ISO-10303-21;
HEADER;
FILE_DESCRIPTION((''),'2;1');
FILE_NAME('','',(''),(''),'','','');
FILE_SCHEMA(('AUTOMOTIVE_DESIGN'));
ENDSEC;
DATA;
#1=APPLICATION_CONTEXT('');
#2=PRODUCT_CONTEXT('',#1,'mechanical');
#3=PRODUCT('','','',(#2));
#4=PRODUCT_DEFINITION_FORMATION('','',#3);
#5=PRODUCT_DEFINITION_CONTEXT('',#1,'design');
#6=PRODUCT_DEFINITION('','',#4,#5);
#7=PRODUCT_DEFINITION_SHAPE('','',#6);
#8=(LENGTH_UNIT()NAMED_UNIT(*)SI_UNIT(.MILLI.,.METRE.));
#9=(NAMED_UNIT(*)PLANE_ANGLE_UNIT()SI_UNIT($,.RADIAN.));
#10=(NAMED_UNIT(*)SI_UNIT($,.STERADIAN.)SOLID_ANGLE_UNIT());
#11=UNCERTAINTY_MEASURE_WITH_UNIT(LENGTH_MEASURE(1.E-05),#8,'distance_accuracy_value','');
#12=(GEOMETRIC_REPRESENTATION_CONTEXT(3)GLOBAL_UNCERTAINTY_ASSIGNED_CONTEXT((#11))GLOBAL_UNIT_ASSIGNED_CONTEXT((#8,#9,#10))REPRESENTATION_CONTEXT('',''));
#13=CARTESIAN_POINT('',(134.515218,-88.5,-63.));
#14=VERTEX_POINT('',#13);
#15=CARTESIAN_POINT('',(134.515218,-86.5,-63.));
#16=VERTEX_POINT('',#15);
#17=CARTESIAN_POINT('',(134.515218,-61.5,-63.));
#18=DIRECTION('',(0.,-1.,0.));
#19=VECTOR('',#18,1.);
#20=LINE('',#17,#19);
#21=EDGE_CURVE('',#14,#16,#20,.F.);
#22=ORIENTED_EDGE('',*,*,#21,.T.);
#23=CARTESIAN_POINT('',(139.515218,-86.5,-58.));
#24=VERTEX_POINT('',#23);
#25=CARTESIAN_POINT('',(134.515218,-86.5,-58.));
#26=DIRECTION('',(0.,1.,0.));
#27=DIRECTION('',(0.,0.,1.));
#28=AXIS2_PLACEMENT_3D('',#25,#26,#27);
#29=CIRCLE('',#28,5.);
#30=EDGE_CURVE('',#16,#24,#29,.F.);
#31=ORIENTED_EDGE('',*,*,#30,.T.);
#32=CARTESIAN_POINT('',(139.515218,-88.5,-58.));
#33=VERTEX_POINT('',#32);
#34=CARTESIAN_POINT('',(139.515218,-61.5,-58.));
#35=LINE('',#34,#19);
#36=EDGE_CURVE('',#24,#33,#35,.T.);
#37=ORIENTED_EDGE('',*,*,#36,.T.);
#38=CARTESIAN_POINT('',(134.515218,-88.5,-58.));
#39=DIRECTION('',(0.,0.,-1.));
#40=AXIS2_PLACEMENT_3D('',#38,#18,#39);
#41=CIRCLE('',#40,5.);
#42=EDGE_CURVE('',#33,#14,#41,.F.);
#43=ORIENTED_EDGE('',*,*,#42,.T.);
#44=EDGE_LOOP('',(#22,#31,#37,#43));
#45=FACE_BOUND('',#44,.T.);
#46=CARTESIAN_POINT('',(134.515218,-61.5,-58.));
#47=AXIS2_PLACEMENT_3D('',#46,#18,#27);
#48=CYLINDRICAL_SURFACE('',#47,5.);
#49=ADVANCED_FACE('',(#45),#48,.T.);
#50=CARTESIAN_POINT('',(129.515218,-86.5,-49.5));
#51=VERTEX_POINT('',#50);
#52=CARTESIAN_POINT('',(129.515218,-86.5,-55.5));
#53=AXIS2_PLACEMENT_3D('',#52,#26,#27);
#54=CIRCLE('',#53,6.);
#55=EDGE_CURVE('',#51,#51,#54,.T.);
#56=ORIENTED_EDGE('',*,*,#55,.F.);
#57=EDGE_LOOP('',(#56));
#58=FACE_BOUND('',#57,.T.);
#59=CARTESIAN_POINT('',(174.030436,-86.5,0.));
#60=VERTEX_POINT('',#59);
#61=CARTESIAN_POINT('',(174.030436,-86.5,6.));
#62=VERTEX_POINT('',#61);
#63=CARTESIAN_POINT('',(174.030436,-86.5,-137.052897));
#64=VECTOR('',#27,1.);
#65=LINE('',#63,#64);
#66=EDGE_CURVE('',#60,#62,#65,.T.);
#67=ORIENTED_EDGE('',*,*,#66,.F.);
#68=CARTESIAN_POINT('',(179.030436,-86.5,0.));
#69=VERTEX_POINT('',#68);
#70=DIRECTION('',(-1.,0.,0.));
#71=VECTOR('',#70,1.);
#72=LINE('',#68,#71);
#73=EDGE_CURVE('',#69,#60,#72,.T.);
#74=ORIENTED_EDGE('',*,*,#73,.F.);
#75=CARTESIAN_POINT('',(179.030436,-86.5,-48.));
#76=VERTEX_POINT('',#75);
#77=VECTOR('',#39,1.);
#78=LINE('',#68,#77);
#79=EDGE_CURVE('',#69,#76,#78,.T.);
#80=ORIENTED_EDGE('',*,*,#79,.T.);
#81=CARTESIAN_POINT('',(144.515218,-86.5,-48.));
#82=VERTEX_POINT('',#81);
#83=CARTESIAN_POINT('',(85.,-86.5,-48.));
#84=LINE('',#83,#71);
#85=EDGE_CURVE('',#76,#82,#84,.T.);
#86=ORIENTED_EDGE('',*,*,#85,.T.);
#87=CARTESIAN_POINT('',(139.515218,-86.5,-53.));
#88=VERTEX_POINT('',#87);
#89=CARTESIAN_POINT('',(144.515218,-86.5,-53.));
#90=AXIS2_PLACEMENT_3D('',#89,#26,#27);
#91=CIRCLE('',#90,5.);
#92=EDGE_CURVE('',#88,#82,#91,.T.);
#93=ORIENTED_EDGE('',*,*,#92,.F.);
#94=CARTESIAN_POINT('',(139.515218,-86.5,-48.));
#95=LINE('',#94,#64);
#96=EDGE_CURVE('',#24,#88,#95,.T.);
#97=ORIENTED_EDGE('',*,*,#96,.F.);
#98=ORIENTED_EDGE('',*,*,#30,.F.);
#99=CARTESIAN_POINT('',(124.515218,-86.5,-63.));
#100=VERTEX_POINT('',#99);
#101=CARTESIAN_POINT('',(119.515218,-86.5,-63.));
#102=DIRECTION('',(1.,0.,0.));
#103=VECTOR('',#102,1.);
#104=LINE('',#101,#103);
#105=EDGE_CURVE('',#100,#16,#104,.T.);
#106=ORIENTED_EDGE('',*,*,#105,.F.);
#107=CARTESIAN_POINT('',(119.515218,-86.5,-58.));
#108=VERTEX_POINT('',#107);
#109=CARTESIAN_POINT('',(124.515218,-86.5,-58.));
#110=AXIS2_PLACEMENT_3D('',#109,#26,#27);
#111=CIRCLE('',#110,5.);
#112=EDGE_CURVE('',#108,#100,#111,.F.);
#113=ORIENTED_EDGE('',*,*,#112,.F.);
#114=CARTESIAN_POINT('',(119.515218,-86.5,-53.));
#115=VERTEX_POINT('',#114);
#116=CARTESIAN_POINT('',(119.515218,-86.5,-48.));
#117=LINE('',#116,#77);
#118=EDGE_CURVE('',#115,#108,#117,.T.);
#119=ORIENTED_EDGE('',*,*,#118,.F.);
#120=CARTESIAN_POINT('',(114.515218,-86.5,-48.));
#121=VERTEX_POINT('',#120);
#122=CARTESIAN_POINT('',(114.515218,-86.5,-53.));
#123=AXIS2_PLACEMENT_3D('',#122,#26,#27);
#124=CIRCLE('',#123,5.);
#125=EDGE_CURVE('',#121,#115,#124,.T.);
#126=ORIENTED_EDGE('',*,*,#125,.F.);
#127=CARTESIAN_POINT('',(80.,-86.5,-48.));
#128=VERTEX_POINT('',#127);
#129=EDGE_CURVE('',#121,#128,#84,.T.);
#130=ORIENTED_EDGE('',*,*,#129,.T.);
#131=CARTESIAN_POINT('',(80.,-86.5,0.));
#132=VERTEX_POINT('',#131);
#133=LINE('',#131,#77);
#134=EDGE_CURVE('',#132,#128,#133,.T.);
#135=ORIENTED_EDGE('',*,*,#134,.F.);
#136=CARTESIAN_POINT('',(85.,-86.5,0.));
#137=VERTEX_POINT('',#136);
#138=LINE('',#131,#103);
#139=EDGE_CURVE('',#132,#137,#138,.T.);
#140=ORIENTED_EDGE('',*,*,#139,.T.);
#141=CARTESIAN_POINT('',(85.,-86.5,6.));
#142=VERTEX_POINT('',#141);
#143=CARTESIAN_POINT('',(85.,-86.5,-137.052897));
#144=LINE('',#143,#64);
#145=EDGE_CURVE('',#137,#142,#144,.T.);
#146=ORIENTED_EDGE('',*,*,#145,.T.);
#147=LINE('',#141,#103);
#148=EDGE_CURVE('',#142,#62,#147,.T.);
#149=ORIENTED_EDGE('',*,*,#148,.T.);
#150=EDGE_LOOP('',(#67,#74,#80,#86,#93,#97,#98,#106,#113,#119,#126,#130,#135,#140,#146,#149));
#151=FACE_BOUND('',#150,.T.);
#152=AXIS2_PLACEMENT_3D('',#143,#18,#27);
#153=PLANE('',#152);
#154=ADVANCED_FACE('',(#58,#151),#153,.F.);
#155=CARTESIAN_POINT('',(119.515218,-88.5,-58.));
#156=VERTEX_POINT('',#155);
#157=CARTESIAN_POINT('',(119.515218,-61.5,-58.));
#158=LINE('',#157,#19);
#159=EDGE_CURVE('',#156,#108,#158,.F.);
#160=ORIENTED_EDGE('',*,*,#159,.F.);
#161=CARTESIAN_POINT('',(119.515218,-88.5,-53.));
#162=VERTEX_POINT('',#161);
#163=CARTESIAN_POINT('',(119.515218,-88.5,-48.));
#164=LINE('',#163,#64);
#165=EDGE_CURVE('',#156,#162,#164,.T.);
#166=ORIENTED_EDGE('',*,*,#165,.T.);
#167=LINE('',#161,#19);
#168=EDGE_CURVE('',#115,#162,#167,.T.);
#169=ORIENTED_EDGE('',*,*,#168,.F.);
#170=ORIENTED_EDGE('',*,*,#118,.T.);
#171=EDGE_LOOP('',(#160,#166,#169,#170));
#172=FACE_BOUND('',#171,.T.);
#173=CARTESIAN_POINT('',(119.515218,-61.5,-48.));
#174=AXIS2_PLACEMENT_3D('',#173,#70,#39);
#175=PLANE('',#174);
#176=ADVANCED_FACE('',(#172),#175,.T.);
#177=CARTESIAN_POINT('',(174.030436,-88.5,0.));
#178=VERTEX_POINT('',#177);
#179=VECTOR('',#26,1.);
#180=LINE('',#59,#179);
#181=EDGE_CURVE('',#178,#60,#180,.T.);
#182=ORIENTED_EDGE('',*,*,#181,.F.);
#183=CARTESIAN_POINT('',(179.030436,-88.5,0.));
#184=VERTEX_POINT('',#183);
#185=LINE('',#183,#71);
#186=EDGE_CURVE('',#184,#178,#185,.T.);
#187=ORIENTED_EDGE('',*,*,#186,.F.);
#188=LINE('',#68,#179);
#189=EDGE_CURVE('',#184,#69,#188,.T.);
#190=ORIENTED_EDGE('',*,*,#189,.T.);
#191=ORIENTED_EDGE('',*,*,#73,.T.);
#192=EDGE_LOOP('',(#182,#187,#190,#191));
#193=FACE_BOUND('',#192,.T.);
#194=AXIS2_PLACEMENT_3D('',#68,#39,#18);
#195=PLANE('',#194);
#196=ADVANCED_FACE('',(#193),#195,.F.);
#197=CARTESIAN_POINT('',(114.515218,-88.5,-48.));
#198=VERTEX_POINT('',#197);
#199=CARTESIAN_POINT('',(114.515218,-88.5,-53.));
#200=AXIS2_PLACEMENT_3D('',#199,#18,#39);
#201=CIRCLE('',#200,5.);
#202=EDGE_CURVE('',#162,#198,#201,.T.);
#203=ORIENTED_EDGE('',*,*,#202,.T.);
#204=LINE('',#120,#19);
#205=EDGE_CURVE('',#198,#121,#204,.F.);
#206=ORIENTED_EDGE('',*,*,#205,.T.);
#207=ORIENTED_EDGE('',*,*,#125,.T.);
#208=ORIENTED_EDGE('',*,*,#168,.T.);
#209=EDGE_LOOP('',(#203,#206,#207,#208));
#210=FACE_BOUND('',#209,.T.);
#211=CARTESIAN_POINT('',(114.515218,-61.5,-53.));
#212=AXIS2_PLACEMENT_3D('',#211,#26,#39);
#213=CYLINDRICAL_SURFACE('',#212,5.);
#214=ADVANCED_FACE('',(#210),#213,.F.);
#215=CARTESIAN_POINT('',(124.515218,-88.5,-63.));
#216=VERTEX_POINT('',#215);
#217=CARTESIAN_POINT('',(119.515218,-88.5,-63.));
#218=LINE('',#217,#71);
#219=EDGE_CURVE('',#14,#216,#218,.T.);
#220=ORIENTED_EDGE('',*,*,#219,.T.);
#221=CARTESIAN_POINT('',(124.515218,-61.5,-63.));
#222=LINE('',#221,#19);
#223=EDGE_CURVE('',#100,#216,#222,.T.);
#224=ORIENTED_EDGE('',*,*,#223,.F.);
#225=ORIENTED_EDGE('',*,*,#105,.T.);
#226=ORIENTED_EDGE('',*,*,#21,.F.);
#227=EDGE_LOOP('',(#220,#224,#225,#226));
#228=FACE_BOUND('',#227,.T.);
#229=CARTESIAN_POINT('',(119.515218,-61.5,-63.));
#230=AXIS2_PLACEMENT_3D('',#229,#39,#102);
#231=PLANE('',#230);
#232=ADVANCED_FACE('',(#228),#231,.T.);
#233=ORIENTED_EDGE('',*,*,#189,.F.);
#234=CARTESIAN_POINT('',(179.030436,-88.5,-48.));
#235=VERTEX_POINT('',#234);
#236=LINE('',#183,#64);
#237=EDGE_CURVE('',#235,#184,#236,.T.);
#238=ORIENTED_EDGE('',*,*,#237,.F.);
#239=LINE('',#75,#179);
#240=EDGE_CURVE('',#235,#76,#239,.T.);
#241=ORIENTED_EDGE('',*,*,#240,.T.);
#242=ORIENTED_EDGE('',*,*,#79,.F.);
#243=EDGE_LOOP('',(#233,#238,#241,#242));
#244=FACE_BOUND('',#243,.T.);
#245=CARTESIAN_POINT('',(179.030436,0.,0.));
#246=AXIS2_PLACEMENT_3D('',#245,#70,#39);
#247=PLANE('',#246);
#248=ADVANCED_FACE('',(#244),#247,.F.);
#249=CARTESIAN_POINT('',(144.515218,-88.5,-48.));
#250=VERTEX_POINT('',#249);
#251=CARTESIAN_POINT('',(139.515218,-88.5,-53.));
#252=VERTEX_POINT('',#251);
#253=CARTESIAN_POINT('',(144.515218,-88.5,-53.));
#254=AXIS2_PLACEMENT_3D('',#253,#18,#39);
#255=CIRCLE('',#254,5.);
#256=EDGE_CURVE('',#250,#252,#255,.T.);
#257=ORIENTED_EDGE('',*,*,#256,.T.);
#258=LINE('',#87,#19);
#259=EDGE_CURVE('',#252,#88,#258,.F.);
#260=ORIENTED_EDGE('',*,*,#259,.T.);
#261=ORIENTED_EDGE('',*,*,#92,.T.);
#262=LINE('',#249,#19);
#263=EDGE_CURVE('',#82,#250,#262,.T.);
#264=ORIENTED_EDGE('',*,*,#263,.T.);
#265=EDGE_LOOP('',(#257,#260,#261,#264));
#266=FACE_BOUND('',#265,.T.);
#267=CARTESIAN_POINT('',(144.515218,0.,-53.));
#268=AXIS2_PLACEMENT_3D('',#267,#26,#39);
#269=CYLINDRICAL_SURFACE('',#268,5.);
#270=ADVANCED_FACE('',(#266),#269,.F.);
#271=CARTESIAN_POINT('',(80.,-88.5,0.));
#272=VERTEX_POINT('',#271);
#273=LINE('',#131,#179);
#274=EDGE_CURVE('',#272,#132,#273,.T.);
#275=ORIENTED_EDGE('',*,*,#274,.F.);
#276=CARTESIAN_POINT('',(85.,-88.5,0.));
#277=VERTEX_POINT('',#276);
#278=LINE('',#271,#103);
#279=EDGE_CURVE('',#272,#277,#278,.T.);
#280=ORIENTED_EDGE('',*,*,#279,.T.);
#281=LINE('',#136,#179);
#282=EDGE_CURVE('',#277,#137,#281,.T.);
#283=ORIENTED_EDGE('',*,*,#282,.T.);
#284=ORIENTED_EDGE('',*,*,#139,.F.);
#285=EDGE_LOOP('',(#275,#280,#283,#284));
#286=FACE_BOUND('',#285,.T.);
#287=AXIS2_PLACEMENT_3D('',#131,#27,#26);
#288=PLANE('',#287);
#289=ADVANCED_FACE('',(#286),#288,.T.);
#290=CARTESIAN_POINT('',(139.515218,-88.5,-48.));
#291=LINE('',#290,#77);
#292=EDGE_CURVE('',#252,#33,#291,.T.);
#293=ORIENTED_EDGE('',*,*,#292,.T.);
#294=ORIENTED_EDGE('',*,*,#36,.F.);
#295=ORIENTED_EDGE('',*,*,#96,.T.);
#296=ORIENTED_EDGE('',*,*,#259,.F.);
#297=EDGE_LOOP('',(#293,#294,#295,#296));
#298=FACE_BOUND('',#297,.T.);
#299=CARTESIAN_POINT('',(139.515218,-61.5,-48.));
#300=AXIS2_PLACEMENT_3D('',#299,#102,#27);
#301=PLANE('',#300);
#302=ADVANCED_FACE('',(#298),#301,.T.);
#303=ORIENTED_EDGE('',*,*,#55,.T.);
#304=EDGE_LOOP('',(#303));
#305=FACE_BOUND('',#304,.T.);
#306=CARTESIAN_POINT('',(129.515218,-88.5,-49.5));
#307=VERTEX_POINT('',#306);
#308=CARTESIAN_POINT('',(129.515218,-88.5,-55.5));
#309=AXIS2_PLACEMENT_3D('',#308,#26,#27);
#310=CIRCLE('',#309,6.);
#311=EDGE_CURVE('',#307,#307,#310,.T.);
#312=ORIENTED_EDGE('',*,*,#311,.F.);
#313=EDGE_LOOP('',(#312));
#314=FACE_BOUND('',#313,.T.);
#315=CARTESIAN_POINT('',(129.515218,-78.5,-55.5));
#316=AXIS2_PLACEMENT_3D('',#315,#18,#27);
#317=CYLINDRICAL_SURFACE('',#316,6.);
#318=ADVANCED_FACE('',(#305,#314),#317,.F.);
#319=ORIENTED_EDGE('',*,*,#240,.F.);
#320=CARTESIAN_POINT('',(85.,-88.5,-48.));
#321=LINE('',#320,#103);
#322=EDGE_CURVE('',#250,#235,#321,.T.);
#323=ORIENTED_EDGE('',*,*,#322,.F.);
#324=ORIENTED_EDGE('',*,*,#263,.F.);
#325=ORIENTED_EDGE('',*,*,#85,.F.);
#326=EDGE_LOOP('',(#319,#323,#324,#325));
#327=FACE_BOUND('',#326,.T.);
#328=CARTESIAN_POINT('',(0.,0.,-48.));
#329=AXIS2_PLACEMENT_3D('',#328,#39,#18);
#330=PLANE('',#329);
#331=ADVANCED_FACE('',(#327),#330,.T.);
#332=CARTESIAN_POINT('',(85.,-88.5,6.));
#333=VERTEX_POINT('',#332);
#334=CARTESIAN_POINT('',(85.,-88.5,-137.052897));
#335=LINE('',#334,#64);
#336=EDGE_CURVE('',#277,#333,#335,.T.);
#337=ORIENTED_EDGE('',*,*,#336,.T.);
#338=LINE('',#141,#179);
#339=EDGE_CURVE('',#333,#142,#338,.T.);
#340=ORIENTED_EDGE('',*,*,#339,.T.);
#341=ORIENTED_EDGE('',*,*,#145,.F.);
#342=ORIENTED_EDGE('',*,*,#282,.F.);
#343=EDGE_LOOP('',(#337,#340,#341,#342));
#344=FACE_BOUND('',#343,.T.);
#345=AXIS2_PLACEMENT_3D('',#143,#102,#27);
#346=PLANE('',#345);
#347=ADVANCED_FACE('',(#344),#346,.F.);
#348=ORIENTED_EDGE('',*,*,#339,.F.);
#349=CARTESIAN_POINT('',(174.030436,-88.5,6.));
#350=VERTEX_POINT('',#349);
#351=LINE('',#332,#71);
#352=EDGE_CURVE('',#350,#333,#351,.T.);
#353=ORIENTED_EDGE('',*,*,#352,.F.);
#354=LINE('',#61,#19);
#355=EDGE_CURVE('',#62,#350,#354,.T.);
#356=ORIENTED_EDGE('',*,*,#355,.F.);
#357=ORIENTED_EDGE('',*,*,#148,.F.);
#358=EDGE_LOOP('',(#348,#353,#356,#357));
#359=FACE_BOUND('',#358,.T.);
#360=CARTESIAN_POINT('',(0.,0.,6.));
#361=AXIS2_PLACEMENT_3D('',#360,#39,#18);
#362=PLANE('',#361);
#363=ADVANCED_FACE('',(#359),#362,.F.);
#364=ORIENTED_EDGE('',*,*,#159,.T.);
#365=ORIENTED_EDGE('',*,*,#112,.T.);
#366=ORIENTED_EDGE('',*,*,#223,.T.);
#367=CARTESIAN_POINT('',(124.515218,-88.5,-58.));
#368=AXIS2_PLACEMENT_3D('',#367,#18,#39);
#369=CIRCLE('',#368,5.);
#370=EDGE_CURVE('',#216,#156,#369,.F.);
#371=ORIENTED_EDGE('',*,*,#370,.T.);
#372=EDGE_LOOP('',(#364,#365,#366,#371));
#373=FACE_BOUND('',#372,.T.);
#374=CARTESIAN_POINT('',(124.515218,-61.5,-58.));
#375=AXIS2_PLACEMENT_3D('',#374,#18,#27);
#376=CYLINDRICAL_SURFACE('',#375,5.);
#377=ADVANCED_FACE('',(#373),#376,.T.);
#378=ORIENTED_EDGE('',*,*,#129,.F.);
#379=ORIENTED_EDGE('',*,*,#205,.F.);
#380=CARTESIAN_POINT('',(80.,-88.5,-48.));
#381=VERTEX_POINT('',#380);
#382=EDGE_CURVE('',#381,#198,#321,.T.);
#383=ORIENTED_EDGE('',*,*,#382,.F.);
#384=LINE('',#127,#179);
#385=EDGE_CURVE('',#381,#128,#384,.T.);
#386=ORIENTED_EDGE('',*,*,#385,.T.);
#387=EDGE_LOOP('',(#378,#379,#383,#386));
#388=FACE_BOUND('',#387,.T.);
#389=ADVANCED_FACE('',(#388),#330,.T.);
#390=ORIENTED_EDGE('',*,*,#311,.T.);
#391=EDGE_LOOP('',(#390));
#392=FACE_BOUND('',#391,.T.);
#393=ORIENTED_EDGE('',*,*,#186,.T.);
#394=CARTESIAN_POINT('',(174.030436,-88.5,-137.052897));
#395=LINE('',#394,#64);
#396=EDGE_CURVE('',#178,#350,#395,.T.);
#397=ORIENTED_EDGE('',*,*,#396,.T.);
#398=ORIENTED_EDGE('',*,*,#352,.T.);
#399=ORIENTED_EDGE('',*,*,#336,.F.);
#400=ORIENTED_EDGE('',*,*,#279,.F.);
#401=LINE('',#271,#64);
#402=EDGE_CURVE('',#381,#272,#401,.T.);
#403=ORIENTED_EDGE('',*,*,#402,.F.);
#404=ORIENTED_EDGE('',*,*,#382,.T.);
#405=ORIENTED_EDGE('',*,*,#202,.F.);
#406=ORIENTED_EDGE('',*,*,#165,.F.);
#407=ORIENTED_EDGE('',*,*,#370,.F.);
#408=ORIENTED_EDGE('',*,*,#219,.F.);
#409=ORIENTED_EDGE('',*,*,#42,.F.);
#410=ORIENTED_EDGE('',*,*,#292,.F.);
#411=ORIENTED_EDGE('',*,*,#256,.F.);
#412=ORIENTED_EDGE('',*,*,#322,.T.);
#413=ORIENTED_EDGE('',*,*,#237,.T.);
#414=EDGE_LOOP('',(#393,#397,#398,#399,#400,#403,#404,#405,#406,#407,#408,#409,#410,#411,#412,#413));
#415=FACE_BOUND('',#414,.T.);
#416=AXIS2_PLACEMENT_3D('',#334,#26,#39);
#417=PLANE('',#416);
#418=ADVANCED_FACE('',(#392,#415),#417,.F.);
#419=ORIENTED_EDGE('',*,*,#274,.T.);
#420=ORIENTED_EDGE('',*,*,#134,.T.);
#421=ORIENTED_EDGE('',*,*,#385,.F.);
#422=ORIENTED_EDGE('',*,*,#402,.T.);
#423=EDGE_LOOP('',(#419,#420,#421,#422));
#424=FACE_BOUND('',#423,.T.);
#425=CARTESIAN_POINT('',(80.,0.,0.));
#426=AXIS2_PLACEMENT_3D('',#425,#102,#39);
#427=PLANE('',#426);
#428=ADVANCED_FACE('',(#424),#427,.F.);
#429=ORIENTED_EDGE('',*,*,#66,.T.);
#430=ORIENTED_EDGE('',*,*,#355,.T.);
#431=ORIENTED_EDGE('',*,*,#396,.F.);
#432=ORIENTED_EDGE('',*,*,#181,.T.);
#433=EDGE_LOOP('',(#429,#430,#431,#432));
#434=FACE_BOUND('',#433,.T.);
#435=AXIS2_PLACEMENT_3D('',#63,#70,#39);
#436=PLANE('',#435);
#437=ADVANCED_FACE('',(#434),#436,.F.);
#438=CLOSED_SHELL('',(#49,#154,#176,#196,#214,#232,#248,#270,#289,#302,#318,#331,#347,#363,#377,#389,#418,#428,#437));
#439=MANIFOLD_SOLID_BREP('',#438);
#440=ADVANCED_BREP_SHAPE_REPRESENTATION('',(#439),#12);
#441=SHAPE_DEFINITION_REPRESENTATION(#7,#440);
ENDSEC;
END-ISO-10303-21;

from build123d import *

# Parameters (mm, degrees)
ESTRUSIONE_ESTRUSIONE1_DEPTH      = 48
ESTRUSIONE_ESTRUSIONE1_DEPTH_BACK = 6
SCHIZZO1_W                        = 89.03043591
SCHIZZO1_H                        = 2
SCHIZZO2_W                        = 45
SCHIZZO2_H                        = 2
ESTRUSIONE_ESTRUSIONE2_DEPTH      = 5
SCHIZZO3_W                        = 5
SCHIZZO3_H                        = 2
ESTRUSIONE_ESTRUSIONE3_DEPTH      = 3
SCHIZZO4_W                        = 20
SCHIZZO4_H                        = 15
ESTRUSIONE_ESTRUSIONE4_DEPTH      = 2
SCHIZZO5_R                        = 6
TAGLIO_ESTRUSIONE1_DEPTH          = 10
RACCORDO1_R                       = 5
CORPO_SPOSTA_COPIA3_START         = -88.5
CORPO_SPOSTA_COPIA3_OUTLINE_R     = 6
CORPO_SPOSTA_COPIA3_DEPTH         = 2
CORPO_SPOSTA_COPIA3_2_OUTLINE_R   = 6
CORPO_SPOSTA_COPIA3_2_DEPTH       = 2


# Read off the part's stored shape, not the designer's step: Corpo-Sposta/copia3
with BuildPart() as part:
    # Schizzo1 → Estrusione-Estrusione1 (new, two sides: drawn at the far end of the back side and taken through both)
    with BuildSketch(Plane.XY.offset(-ESTRUSIONE_ESTRUSIONE1_DEPTH_BACK)):
        with Locations((129.515217955, -87.5)):
            Rectangle(SCHIZZO1_W, SCHIZZO1_H)
    extrude(amount=ESTRUSIONE_ESTRUSIONE1_DEPTH + ESTRUSIONE_ESTRUSIONE1_DEPTH_BACK)

    # Schizzo2 → Estrusione-Estrusione2 (add)
    with BuildSketch(Plane(origin=(174.03043591, 0, 0), x_dir=(0, 0, -1), z_dir=(1, 0, 0))):
        with Locations((-22.5, -87.5)):
            Rectangle(SCHIZZO2_W, SCHIZZO2_H)
    estrusione_estrusione2 = extrude(amount=ESTRUSIONE_ESTRUSIONE2_DEPTH)

    # Schizzo3 → Estrusione-Estrusione3 (add)
    with BuildSketch(Plane.XY.offset(45)):
        with Locations((176.53043591, -87.5)):
            Rectangle(SCHIZZO3_W, SCHIZZO3_H)
    estrusione_estrusione3 = extrude(amount=ESTRUSIONE_ESTRUSIONE3_DEPTH)

    # Specchia1: Estrusione-Estrusione2, Estrusione-Estrusione3 across plane
    add(estrusione_estrusione2.mirror(Plane(origin=(129.515217955, 0, 0), x_dir=(0, 0, 1), z_dir=(1, 0, 0))))
    add(estrusione_estrusione3.mirror(Plane(origin=(129.515217955, 0, 0), x_dir=(0, 0, 1), z_dir=(1, 0, 0))))

    # Schizzo4 → Estrusione-Estrusione4 (add)
    with BuildSketch(Plane(origin=(0, -88.5, 0), x_dir=(-1, 0, 0), z_dir=(0, -1, 0))):
        with Locations((-129.515217955, -55.5)):
            Rectangle(SCHIZZO4_W, SCHIZZO4_H)
    extrude(amount=-ESTRUSIONE_ESTRUSIONE4_DEPTH)

    # Schizzo5 → Taglio-Estrusione1 (cut)
    with BuildSketch(Plane.XZ.offset(88.5)):
        with Locations(Location((129.515217955, 55.5, 0), (0, 0, 270))):
            Circle(SCHIZZO5_R)
    extrude(amount=-TAGLIO_ESTRUSIONE1_DEPTH, mode=Mode.SUBTRACT)

    # Raccordo1
    raccordo1_edges = [part.edges().sort_by_distance(p)[0] for p in [
        (139.515217955, -87.5, 63),
        (139.515217955, -87.5, 48),
        (119.515217955, -87.5, 48),
        (119.515217955, -87.5, 63),
    ]]
    fillet(raccordo1_edges, radius=RACCORDO1_R)

    # Corpo-Sposta/copia3 outline → Corpo-Sposta/copia3 (cut)
    with BuildSketch(Plane(origin=(0, 0, 0), x_dir=(1, 0, 0), z_dir=(0, 1, 0)).offset(CORPO_SPOSTA_COPIA3_START)):
        with BuildLine():
            Line((179.03043591, -48), (179.03043591, 0))
            Line((179.03043591, 0), (174.03043591, 0))
            Line((174.03043591, 0), (174.03043591, -6))
            Line((174.03043591, -6), (85, -6))
            Line((85, -6), (85, 0))
            Line((85, 0), (80, 0))
            Line((80, 0), (80, -48))
            Line((80, -48), (114.515217955, -48))
            ThreePointArc((114.515217955, -48), (118.050751861, -49.464466094), (119.515217955, -53))
            Line((119.515217955, -53), (119.515217955, -58))
            ThreePointArc((119.515217955, -58), (120.979684049, -61.535533906), (124.515217955, -63))
            Line((124.515217955, -63), (134.515217955, -63))
            ThreePointArc((134.515217955, -63), (138.050751861, -61.535533906), (139.515217955, -58))
            Line((139.515217955, -58), (139.515217955, -53))
            ThreePointArc((139.515217955, -53), (140.979684049, -49.464466094), (144.515217955, -48))
            Line((144.515217955, -48), (179.03043591, -48))
        make_face()
        with Locations((129.515217955, -55.5)):
            Circle(CORPO_SPOSTA_COPIA3_OUTLINE_R, mode=Mode.SUBTRACT)
    extrude(amount=CORPO_SPOSTA_COPIA3_DEPTH, mode=Mode.SUBTRACT)

    # Corpo-Sposta_copia3 2 outline → Corpo-Sposta_copia3 2 (add)
    with BuildSketch(Plane(origin=(0, 0, 0), x_dir=(1, 0, 0), z_dir=(0, 1, 0)).offset(CORPO_SPOSTA_COPIA3_START)):
        with BuildLine():
            Line((179.03043591, 0), (179.03043591, 48))
            Line((179.03043591, 48), (144.515217955, 48))
            ThreePointArc((144.515217955, 48), (140.979684049, 49.464466094), (139.515217955, 53))
            Line((139.515217955, 53), (139.515217955, 58))
            ThreePointArc((139.515217955, 58), (138.050751861, 61.535533906), (134.515217955, 63))
            Line((134.515217955, 63), (124.515217955, 63))
            ThreePointArc((124.515217955, 63), (120.979684049, 61.535533906), (119.515217955, 58))
            Line((119.515217955, 58), (119.515217955, 53))
            ThreePointArc((119.515217955, 53), (118.050751861, 49.464466094), (114.515217955, 48))
            Line((114.515217955, 48), (80, 48))
            Line((80, 48), (80, 0))
            Line((80, 0), (85, 0))
            Line((85, 0), (85, 6))
            Line((85, 6), (174.03043591, 6))
            Line((174.03043591, 6), (174.03043591, 0))
            Line((174.03043591, 0), (179.03043591, 0))
        make_face()
        with Locations((129.515217955, 55.5)):
            Circle(CORPO_SPOSTA_COPIA3_2_OUTLINE_R, mode=Mode.SUBTRACT)
    extrude(amount=CORPO_SPOSTA_COPIA3_2_DEPTH)


solid = part.part
